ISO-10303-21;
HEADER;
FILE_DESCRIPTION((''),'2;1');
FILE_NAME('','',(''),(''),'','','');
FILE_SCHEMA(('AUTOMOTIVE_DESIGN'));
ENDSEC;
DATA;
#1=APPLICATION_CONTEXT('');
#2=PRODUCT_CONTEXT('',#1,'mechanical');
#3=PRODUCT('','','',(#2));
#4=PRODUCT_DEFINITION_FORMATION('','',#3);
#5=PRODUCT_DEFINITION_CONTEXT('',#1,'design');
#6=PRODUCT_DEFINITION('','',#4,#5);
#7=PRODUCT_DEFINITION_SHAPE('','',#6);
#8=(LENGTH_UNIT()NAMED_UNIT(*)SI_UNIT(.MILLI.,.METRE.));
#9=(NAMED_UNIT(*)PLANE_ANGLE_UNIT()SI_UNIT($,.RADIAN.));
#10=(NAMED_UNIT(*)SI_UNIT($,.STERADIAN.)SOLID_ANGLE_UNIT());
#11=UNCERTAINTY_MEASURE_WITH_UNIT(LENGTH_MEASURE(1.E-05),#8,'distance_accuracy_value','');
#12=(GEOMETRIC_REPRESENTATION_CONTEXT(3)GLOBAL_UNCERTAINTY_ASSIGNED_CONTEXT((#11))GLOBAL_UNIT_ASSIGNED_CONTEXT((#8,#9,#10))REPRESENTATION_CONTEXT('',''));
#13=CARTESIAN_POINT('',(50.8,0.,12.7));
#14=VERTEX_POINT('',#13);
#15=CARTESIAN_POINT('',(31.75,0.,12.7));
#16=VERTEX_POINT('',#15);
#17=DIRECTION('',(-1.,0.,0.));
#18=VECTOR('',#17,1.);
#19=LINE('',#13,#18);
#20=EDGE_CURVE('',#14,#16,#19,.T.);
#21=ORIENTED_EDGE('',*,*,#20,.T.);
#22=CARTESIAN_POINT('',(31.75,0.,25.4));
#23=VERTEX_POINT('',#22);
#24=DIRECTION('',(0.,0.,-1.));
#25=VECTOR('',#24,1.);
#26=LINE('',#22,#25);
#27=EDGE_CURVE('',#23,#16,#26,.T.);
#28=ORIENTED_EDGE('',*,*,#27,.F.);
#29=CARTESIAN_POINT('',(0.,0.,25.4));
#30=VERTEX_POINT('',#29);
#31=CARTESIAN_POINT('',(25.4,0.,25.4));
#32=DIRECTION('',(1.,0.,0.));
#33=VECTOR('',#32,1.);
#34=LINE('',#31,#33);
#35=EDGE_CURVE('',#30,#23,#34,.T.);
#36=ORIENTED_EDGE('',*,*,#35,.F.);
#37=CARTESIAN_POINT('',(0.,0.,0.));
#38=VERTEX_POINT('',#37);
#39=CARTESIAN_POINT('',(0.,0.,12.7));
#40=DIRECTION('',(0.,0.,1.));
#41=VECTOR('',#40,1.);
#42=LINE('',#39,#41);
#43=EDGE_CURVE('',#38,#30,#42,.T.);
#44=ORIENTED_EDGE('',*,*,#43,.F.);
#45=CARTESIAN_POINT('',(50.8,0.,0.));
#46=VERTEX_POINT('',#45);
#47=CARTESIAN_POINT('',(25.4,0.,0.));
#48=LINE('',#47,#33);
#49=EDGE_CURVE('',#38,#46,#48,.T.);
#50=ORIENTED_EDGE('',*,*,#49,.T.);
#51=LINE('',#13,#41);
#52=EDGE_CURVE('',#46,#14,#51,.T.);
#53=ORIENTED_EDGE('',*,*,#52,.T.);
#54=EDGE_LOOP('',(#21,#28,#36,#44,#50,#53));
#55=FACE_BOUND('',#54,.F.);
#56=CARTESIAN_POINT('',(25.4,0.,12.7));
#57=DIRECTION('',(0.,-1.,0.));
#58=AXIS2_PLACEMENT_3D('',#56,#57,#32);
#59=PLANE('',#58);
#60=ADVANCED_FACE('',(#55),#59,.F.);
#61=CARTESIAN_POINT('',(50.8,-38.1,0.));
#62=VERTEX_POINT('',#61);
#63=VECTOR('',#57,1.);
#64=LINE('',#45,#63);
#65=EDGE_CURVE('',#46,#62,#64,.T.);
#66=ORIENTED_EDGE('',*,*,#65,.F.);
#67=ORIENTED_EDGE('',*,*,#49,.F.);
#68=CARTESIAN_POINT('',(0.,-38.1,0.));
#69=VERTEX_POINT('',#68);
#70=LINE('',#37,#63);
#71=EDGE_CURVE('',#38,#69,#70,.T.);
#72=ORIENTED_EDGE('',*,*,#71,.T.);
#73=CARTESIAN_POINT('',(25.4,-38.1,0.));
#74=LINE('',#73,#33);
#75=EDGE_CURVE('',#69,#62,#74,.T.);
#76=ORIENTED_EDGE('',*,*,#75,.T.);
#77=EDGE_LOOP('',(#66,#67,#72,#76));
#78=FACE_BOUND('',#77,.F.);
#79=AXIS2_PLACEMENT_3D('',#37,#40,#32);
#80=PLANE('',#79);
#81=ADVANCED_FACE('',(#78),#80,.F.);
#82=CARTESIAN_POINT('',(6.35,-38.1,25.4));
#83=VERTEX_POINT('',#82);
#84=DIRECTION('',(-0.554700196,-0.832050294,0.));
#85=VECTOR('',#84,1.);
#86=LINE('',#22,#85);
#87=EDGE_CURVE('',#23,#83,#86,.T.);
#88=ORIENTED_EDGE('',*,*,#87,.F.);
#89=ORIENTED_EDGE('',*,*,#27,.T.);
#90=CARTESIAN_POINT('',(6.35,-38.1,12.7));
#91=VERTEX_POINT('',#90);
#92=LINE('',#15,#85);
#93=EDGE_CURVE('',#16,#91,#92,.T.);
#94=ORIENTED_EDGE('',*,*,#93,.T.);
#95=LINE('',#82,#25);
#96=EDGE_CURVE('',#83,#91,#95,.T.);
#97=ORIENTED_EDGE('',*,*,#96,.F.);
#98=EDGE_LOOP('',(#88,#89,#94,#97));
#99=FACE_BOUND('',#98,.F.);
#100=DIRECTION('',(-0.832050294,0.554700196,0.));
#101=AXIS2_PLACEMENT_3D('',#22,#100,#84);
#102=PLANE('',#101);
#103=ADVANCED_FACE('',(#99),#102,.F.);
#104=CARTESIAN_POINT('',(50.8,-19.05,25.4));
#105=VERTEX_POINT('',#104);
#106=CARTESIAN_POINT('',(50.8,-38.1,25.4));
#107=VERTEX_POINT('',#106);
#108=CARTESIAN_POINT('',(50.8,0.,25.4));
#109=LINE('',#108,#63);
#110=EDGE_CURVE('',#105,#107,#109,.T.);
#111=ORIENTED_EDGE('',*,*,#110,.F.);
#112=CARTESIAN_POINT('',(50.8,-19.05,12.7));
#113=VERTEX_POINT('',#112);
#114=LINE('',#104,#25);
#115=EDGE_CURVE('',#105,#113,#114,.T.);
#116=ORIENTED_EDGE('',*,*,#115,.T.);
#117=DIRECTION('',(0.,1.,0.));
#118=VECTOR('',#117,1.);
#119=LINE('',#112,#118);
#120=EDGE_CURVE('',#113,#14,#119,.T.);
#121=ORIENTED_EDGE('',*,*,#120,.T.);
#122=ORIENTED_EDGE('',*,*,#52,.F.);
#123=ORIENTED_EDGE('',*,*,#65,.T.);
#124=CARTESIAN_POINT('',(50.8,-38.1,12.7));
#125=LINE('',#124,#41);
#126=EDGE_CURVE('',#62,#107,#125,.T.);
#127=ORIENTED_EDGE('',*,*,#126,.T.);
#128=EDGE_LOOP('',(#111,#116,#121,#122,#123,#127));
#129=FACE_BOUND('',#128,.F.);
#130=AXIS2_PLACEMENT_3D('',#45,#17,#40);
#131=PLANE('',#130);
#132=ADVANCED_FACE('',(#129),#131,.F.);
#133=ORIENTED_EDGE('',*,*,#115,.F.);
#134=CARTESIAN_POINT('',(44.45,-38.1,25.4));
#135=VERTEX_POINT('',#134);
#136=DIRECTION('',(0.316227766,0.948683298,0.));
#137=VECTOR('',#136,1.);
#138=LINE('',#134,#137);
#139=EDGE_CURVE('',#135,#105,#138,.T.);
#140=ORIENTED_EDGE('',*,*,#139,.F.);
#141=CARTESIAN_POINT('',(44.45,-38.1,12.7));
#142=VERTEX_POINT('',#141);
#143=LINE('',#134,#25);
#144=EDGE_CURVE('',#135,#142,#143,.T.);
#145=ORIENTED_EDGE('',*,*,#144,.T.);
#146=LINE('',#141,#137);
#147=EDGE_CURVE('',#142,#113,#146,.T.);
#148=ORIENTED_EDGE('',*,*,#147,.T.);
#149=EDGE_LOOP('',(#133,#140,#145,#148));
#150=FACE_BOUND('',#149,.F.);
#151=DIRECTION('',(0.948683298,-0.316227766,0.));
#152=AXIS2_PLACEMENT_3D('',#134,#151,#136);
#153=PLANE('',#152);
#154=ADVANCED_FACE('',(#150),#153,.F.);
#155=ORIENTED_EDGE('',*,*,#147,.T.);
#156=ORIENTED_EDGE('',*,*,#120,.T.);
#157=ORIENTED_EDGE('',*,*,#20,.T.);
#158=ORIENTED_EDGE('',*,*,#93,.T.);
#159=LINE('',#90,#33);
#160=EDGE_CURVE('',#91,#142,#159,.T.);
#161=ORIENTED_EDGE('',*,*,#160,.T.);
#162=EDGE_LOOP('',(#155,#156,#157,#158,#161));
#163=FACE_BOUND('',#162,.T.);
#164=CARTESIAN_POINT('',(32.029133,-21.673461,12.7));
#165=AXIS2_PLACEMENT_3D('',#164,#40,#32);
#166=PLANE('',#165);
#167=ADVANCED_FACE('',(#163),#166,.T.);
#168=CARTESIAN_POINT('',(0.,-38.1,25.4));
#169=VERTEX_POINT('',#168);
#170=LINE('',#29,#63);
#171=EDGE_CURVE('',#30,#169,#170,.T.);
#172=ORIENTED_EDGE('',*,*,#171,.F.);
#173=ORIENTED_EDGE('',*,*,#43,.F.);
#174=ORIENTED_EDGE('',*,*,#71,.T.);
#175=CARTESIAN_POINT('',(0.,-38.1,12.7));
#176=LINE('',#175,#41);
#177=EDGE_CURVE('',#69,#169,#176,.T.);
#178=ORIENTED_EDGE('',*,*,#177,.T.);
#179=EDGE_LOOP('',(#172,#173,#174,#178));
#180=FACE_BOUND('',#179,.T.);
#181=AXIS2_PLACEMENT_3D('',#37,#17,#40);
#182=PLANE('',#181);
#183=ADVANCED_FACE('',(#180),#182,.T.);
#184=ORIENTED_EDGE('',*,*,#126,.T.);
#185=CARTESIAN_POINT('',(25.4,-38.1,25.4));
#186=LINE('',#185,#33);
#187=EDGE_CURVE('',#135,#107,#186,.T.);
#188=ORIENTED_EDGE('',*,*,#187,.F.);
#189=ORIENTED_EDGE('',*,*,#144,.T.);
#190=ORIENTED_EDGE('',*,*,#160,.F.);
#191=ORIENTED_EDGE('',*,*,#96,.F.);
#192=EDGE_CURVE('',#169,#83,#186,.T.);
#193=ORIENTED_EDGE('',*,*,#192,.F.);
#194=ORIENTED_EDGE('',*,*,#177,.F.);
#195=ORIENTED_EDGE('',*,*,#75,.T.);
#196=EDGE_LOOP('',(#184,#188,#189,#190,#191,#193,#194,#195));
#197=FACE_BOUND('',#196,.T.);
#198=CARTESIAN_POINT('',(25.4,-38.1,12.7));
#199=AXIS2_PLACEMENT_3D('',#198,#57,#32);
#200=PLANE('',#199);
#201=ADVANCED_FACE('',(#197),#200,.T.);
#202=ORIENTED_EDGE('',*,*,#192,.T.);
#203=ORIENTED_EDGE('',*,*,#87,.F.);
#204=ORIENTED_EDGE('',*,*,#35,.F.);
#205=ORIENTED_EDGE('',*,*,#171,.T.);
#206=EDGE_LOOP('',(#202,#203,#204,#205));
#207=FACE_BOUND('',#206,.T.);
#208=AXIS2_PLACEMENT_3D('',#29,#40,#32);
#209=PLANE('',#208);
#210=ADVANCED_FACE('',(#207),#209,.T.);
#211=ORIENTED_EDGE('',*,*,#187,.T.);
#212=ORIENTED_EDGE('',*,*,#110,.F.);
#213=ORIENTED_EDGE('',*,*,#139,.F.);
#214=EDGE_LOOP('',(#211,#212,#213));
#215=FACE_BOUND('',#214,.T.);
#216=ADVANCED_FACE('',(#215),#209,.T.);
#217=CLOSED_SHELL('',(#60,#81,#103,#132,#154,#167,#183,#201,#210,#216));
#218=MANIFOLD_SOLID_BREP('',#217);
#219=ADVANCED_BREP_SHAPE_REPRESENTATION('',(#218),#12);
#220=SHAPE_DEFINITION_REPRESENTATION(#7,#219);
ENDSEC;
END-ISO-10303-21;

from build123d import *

# Parameters (mm, degrees)
F0_W     = 50.8
F0_H     = 25.4
F1_DEPTH = 38.1
F3_DEPTH = 12.7


# Not quite as in the source:
# - a length typed as a fraction of an inch, garbled in the dataset ("3 / 203.2 mm" for 3/8 in), is restored


with BuildPart() as f1:
    # F0 (on Front) → F1 (new body)
    with BuildSketch(Plane.XZ):
        with Locations((25.4, 12.7)):
            Rectangle(F0_W, F0_H)
    extrude(amount=F1_DEPTH)

    # F2 (on face) → F3 (cut)
    with BuildSketch(Plane.XY.offset(25.4)):
        Polygon((31.75, 0), (6.35, -38.1), (44.45, -38.1), (50.8, -19.05), (50.8, 0), align=None)
    extrude(amount=-F3_DEPTH, mode=Mode.SUBTRACT)


solid = f1.part
